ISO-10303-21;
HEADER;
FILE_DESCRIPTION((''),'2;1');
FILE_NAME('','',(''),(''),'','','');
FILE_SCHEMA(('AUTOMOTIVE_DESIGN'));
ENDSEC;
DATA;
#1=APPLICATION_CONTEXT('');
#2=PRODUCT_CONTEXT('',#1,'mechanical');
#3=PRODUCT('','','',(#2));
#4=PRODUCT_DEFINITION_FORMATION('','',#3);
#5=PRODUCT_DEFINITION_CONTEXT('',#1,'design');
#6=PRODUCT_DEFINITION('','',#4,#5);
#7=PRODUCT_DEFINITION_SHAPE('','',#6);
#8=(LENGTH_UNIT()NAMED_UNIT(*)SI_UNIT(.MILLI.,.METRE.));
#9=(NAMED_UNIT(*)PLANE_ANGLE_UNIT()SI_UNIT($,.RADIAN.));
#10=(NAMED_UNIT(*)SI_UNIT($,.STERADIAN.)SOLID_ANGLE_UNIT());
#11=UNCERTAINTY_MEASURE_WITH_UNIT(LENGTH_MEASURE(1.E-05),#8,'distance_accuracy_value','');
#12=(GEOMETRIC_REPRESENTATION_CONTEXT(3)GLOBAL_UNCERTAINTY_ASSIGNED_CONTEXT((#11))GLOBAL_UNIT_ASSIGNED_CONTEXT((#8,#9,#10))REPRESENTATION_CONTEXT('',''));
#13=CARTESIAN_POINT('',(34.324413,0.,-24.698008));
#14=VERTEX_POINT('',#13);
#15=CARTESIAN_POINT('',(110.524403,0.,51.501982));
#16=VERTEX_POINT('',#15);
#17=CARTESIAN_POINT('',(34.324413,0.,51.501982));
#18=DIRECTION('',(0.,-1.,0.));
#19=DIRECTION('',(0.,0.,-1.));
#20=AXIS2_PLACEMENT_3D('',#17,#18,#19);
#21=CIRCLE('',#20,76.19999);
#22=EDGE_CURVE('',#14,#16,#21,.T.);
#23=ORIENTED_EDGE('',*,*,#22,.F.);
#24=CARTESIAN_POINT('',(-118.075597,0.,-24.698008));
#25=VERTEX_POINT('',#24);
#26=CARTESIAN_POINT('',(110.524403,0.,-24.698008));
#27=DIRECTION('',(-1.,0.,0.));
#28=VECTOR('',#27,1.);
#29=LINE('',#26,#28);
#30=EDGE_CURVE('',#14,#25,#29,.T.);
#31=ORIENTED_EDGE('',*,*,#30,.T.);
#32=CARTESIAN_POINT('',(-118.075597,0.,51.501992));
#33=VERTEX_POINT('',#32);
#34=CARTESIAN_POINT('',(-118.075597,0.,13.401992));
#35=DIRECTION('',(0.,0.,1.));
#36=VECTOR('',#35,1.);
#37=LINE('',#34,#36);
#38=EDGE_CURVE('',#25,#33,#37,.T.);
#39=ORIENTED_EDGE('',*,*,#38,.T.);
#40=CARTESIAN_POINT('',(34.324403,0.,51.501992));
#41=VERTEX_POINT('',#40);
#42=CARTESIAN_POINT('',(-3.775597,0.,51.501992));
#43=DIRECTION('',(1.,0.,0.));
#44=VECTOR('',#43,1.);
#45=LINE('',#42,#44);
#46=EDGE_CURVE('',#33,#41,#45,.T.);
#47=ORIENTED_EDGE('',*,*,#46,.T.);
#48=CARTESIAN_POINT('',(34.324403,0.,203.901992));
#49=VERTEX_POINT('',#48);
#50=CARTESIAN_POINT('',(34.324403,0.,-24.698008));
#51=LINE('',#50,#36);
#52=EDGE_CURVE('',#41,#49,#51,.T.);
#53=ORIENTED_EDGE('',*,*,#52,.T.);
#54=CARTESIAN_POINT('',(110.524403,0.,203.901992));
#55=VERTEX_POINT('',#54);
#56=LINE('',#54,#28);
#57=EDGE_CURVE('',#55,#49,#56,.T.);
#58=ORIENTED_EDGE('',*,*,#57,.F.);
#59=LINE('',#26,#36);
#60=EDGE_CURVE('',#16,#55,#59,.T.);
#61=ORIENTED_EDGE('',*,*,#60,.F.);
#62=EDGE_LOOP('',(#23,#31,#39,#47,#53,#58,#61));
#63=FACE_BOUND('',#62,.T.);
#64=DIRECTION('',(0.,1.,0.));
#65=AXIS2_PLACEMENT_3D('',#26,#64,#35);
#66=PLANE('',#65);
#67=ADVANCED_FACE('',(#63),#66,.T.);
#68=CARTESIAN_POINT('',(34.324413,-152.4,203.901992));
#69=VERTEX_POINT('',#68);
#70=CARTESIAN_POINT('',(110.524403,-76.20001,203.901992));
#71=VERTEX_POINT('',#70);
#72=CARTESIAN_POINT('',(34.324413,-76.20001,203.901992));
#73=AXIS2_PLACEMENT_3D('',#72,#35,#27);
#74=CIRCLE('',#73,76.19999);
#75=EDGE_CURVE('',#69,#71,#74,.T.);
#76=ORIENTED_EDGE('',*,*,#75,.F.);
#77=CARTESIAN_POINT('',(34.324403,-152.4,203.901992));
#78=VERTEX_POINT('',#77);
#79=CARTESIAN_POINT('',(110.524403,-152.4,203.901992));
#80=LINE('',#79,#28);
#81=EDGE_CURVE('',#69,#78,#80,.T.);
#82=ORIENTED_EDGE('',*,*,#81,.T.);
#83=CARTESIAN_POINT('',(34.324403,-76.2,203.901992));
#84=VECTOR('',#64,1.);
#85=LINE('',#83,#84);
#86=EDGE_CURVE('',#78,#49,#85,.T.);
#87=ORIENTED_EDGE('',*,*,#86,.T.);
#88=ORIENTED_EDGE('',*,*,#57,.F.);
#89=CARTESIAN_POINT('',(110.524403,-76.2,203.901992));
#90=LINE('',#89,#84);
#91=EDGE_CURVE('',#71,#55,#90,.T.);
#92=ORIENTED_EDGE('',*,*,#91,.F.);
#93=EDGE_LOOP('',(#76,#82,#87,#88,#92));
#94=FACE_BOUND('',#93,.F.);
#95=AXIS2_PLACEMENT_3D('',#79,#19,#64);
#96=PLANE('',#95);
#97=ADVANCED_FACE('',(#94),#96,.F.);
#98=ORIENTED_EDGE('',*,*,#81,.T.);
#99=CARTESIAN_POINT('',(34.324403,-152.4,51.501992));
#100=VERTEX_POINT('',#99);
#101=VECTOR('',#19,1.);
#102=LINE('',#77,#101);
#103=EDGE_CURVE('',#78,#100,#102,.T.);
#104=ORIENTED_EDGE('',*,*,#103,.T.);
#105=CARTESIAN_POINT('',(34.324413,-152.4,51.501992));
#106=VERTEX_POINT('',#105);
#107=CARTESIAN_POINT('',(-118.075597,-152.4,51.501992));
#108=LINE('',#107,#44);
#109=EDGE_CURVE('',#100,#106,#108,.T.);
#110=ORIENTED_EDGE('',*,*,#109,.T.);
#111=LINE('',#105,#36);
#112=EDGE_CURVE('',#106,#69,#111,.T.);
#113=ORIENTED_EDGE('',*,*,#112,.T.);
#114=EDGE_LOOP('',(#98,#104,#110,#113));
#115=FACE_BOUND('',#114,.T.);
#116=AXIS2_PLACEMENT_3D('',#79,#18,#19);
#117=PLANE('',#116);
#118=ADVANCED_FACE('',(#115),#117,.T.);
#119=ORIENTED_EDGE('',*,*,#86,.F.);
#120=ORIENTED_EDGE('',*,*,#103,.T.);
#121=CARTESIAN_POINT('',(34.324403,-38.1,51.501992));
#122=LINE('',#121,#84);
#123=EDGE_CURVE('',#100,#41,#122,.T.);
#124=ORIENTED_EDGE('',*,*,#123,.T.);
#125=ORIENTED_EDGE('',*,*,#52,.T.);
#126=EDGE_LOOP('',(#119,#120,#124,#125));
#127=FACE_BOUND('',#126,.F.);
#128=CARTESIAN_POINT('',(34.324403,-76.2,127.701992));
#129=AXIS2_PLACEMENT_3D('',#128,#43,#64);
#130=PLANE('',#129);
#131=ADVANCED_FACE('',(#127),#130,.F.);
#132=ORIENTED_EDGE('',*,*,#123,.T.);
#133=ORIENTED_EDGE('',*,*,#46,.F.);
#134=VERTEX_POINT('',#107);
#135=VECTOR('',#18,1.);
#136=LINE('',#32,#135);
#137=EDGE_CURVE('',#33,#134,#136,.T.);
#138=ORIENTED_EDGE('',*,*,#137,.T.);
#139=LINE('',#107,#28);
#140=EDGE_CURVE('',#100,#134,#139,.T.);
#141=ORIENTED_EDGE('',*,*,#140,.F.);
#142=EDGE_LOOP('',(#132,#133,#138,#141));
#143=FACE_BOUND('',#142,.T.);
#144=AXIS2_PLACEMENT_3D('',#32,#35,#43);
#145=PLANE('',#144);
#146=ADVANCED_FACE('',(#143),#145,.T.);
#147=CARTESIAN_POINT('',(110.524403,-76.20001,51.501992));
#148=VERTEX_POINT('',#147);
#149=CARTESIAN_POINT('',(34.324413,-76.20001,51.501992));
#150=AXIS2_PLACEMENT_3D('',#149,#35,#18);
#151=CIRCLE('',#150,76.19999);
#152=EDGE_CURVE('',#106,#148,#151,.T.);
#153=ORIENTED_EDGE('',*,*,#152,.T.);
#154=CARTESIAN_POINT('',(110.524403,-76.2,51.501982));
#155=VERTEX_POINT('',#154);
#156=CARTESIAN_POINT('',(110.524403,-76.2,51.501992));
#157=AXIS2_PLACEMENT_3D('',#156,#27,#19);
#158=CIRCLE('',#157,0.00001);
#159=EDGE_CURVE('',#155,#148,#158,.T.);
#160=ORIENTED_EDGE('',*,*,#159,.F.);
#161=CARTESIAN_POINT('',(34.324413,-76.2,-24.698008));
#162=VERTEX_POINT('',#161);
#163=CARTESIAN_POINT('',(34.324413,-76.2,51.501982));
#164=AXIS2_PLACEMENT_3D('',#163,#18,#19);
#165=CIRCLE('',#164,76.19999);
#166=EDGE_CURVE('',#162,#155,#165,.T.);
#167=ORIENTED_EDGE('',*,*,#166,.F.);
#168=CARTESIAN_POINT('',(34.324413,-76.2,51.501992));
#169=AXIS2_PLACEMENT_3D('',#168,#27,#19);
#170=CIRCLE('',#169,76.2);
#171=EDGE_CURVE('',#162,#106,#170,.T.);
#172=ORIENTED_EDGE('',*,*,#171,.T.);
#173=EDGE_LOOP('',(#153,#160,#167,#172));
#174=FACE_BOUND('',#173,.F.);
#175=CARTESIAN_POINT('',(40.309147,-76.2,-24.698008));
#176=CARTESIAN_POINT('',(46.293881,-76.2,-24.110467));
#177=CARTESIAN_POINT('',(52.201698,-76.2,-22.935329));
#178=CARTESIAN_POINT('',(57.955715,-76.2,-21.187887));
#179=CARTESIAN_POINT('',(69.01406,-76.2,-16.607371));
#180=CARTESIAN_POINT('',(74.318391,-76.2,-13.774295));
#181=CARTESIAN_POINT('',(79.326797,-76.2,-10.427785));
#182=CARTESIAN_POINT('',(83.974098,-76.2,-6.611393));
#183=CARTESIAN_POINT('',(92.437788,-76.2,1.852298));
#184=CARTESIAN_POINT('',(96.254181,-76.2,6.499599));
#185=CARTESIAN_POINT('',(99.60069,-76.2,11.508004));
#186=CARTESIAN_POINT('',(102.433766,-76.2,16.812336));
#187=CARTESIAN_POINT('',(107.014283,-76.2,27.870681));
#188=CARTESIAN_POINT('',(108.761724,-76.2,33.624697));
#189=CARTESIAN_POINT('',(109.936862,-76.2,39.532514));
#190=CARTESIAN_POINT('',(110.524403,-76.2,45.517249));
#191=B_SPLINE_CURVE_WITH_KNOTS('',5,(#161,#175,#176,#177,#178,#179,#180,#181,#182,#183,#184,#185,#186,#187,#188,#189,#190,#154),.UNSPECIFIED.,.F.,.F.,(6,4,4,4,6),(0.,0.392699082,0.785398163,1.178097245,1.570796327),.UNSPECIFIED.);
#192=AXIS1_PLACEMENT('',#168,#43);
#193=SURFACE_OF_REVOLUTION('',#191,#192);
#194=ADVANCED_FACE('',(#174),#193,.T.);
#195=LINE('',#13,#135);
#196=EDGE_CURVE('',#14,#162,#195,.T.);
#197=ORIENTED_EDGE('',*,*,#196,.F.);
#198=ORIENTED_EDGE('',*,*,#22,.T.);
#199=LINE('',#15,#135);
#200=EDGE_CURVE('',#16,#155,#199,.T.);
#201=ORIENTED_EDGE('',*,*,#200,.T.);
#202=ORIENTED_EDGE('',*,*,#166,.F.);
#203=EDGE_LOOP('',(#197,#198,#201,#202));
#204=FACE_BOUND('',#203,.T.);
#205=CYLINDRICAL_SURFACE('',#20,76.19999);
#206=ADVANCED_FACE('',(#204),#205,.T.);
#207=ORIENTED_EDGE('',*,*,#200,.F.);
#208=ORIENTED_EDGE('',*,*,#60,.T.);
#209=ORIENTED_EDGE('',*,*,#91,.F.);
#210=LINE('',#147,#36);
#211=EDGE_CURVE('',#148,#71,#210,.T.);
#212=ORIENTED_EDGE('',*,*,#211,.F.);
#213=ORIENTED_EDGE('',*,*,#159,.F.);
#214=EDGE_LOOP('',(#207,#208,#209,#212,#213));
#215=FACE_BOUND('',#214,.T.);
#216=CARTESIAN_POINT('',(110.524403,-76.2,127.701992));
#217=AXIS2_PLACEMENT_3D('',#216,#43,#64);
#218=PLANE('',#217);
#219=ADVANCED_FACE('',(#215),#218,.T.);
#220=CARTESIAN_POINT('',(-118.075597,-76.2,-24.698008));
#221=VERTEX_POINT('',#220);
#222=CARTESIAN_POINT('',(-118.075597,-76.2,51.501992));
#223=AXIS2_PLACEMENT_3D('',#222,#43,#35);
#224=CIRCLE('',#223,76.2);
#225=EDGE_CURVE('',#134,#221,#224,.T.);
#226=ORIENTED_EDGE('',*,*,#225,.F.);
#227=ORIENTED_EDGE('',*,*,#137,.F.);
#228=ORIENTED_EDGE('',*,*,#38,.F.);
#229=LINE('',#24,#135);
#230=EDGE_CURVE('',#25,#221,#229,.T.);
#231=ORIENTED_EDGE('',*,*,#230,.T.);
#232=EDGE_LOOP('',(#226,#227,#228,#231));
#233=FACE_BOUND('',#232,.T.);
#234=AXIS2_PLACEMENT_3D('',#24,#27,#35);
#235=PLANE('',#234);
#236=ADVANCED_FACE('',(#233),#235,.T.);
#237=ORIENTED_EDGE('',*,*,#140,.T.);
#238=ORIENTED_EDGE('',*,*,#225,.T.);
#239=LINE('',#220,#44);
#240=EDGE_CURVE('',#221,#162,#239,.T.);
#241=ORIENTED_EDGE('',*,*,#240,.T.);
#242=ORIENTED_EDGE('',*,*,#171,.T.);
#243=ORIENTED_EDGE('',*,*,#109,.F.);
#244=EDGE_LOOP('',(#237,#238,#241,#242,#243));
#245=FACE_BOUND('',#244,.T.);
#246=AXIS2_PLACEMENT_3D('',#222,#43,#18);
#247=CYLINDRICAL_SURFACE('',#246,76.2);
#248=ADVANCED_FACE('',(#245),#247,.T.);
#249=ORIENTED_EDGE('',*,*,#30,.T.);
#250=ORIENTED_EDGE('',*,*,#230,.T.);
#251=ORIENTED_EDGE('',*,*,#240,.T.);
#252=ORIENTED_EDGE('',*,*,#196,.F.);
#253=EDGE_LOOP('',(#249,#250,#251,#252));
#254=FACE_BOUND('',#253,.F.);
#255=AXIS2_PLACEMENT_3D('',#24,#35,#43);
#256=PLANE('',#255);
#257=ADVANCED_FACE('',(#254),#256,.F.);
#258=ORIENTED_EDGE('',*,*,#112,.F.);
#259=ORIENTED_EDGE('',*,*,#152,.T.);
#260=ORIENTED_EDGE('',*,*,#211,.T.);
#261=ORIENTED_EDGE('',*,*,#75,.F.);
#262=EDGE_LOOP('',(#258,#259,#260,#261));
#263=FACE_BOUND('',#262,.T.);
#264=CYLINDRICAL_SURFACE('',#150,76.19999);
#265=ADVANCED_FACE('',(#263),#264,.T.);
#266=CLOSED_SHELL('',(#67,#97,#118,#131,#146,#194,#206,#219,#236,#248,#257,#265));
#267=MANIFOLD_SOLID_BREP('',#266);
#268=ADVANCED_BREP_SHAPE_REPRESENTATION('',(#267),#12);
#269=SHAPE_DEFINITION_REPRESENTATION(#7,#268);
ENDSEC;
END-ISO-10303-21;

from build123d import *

# Parameters (mm, degrees)
F0_W     = 228.6
F0_H     = 76.2
F1_DEPTH = 152.4
F2_W     = 152.4
F2_H     = 152.4
F2_H_2   = 76.2
F3_DEPTH = 76.2
F4_R     = 76.2
F5_R     = 76.19999


# Not quite as in the source:
# - a fillet or chamfer is up to 0.001 mm smaller than in the source, because OpenCascade refuses the exact size


with BuildPart() as f1:
    # F0 (on Front) → F1 (new body)
    with BuildSketch(Plane.XZ):
        with Locations((-3.7755966187, 13.4019921658)):
            Rectangle(F0_W, F0_H)
    extrude(amount=F1_DEPTH)

    # F2 (on face) → F3 (join)
    with BuildSketch(Plane.YZ.offset(110.5244033813)):
        with Locations((-76.2, 127.7019921658)):
            Rectangle(F2_W, F2_H)
        with Locations((-76.2, 13.4019921658)):
            Rectangle(F2_W, F2_H_2)
    extrude(amount=-F3_DEPTH)

    # F4
    f4_edges = [f1.edges().sort_by_distance(p)[0] for p in [
        (-3.775597, -152.4, -24.698008),
    ]]
    fillet(f4_edges, radius=F4_R)

    # F5 (radius 76.2 in the source; OpenCascade refuses exactly that, so slightly less here)
    f5_edges = [f1.edges().sort_by_distance(p)[0] for p in [
        (110.524403, -152.4, 127.701992),
    ]]
    fillet(f5_edges, radius=F5_R)


solid = f1.part
